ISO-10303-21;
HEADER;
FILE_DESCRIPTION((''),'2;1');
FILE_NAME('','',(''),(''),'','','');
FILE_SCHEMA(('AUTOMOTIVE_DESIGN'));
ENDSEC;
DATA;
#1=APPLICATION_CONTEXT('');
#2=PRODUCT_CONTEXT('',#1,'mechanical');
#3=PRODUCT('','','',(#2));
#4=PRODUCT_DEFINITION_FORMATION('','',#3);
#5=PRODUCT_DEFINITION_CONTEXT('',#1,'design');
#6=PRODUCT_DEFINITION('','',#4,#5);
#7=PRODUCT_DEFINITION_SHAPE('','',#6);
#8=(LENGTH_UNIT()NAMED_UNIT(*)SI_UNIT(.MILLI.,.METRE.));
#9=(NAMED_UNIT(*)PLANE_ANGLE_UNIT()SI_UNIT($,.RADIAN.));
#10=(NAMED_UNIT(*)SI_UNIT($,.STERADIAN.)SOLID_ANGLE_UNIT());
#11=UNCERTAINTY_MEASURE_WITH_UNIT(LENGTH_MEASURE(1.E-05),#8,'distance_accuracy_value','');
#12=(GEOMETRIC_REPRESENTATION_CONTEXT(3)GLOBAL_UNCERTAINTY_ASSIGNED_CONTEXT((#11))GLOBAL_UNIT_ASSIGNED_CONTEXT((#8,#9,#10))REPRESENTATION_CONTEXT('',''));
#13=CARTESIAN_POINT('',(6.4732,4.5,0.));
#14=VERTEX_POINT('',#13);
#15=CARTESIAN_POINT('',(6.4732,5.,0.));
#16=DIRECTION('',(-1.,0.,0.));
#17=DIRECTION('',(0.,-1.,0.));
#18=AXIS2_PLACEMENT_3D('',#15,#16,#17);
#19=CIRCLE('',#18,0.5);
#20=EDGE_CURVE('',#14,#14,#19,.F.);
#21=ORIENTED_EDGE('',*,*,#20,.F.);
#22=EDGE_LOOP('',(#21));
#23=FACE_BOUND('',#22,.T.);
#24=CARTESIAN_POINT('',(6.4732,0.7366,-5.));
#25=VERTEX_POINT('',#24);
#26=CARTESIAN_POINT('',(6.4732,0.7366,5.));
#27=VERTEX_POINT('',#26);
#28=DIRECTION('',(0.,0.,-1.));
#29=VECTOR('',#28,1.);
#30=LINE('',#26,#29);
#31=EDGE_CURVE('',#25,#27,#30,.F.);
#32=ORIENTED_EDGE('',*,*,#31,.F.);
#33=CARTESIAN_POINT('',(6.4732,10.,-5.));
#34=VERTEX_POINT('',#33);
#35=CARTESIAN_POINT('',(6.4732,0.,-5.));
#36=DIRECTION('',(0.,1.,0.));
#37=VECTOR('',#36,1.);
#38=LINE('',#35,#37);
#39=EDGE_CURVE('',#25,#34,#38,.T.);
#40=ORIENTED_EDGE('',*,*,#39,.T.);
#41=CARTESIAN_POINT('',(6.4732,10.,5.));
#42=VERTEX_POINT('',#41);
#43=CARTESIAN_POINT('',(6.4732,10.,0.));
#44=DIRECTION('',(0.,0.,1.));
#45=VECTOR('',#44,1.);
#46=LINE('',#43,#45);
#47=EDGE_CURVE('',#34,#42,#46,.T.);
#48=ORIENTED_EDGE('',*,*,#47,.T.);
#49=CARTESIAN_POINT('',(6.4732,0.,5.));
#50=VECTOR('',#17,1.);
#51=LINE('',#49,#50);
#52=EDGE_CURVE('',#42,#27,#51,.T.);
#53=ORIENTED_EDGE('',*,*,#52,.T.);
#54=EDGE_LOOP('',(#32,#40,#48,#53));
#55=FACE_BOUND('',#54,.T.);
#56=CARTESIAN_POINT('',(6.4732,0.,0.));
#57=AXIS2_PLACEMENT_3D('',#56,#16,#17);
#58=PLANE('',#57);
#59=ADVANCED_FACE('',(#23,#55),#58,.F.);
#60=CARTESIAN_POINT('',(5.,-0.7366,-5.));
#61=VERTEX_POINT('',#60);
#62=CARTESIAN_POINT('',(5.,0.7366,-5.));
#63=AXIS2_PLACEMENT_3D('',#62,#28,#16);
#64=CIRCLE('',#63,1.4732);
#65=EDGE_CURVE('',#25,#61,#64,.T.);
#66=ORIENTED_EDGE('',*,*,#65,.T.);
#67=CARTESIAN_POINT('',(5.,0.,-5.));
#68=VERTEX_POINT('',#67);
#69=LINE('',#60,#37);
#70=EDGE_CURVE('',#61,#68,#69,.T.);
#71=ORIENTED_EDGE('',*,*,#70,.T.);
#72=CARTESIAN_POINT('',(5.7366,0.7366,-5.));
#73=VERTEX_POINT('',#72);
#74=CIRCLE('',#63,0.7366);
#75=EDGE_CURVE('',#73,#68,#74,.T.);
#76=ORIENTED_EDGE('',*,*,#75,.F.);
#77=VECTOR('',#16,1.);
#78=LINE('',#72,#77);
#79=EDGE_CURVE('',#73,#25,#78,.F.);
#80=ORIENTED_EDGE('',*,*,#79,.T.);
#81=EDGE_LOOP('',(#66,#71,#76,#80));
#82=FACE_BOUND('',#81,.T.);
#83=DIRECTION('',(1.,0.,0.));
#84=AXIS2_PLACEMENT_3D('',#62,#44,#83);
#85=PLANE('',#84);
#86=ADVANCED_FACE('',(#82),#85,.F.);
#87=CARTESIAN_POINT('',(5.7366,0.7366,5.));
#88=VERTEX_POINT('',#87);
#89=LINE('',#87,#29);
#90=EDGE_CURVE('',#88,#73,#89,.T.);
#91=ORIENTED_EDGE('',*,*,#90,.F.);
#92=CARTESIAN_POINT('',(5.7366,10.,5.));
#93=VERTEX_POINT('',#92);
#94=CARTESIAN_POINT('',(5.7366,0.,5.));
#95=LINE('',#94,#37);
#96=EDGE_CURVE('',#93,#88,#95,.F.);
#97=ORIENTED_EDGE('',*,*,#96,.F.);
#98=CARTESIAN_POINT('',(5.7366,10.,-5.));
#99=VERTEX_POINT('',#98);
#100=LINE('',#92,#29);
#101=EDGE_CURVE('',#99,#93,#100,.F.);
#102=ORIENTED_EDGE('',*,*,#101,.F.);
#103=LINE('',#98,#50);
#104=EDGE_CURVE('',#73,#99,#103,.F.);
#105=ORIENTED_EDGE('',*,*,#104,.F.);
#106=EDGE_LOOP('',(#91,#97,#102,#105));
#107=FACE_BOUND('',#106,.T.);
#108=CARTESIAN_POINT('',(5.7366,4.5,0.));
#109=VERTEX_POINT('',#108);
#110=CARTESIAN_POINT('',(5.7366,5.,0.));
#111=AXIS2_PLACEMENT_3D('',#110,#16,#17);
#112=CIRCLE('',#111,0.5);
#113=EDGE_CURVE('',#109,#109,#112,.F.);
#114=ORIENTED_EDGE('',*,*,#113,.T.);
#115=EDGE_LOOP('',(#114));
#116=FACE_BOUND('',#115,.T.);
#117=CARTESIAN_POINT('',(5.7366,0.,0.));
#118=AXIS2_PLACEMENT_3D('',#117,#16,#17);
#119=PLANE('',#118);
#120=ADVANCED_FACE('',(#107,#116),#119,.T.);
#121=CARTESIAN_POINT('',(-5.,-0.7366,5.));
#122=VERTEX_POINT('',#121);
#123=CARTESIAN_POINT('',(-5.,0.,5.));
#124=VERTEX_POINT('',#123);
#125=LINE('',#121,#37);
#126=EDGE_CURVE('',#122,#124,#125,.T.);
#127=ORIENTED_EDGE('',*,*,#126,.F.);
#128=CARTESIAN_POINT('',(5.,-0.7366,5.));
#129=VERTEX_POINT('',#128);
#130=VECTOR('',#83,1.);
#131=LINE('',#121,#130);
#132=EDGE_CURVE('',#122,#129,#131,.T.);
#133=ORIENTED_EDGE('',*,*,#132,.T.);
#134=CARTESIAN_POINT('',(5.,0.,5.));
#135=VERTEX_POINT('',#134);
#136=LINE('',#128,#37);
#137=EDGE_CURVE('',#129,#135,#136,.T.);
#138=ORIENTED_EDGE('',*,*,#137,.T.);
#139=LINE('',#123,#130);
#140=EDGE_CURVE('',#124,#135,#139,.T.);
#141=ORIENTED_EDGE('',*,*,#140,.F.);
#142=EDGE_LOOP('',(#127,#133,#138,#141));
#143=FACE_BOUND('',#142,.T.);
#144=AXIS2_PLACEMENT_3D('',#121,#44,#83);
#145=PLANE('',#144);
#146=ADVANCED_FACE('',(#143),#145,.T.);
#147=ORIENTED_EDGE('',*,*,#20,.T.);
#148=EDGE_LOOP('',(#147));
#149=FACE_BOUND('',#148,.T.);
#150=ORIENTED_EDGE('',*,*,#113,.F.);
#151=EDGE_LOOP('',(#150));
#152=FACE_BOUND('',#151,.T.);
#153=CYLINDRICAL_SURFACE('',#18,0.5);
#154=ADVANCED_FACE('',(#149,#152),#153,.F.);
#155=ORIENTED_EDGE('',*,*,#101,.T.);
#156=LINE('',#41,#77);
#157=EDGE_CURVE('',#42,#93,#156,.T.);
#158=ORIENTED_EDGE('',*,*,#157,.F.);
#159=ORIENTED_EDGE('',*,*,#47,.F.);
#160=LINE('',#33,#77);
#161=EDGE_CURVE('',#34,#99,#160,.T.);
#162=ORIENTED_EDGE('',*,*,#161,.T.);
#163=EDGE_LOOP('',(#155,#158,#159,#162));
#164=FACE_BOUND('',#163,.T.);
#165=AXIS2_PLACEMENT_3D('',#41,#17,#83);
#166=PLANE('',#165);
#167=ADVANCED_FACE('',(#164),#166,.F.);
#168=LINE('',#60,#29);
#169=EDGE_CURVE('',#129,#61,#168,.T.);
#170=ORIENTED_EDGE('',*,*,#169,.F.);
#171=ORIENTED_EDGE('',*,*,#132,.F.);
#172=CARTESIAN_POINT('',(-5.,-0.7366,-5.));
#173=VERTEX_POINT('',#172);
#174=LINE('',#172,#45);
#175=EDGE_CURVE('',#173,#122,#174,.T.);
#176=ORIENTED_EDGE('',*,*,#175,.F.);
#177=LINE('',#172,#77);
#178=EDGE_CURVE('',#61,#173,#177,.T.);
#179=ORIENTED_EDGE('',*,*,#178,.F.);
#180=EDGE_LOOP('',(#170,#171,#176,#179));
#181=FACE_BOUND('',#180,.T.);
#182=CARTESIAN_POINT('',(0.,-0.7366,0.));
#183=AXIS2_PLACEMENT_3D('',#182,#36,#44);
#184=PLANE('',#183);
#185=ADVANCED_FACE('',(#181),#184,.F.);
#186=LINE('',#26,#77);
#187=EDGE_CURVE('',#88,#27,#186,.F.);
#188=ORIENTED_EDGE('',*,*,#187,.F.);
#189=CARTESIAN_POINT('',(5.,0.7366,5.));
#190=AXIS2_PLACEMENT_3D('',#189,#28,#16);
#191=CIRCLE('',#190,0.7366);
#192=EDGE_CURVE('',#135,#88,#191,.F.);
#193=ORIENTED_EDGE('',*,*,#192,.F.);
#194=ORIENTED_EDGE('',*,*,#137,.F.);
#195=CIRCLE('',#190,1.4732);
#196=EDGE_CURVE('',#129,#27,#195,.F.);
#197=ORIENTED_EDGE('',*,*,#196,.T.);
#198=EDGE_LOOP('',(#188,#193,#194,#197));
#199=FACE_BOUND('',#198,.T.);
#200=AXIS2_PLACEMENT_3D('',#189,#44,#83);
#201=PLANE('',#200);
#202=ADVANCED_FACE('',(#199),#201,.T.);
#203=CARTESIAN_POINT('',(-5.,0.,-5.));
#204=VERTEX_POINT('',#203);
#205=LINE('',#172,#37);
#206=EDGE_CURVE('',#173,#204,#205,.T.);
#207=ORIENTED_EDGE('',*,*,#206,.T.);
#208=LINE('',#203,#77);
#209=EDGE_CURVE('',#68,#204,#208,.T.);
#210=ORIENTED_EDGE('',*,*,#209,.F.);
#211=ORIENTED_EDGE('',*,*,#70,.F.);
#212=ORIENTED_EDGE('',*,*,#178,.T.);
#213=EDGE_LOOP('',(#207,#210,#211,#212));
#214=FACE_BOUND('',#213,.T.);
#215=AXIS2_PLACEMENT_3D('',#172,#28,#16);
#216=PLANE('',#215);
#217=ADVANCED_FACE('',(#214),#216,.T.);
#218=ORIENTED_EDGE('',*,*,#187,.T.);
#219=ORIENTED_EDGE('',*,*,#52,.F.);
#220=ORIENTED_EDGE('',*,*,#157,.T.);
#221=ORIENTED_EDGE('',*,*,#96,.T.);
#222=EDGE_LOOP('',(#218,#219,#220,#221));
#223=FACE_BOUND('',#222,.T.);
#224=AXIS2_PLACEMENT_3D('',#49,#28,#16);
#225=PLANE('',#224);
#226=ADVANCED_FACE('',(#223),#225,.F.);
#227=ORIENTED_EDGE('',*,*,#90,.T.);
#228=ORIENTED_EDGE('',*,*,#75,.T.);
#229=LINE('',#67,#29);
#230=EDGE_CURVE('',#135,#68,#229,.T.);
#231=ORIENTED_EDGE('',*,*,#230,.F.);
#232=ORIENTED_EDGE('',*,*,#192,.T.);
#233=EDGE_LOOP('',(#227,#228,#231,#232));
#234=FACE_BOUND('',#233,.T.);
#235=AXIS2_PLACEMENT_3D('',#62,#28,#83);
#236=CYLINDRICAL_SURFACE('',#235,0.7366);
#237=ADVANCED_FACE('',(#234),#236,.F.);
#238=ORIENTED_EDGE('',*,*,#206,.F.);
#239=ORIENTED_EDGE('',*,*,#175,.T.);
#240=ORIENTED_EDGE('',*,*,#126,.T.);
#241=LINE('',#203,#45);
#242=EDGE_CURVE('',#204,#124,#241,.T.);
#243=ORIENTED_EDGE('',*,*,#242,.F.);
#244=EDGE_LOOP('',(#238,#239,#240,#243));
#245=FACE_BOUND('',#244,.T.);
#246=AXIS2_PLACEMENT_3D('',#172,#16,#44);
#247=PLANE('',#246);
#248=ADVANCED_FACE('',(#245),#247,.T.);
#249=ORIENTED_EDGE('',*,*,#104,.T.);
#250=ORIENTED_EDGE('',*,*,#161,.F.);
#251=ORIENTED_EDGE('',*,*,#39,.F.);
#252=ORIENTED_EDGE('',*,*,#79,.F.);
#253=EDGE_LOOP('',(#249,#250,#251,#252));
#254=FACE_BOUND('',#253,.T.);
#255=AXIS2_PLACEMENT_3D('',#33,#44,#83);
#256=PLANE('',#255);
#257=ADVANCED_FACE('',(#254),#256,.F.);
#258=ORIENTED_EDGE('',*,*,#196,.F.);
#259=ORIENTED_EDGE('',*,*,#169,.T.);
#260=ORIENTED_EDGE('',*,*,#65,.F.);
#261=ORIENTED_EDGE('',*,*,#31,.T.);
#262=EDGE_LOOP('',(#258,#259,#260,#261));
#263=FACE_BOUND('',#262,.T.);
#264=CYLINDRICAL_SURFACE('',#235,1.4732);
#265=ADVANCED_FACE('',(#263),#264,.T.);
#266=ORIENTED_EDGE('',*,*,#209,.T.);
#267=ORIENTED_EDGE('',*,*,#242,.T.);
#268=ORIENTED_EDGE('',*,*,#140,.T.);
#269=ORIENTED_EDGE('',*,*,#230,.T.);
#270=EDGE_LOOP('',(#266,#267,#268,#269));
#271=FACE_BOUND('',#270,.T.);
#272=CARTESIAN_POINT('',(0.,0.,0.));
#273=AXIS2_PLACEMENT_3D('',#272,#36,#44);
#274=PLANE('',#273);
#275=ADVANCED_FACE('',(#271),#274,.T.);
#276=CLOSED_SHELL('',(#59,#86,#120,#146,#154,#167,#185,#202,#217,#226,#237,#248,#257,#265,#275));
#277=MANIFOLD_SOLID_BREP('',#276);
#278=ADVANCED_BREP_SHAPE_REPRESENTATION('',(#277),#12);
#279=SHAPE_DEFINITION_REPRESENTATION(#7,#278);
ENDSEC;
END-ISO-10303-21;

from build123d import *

# Parameters (mm, degrees)
SKETCH1_W               = 10
SKETCH1_H               = 10
BASE_FLANGE1_DEPTH      = 0.7366
EDGE_FLANGE1_DEPTH      = 10
EDGE_FLANGE1_START      = 0.7366
EDGE_FLANGE1_PROFILE_W  = 10
EDGE_FLANGE1_PROFILE_H  = 9.2634
EDGE_FLANGE1_PROFILE_R  = 0.5
EDGE_FLANGE1_FLAT_DEPTH = 0.7366


# Sheet-metal steps are written as plain solids
with BuildPart() as part:
    # Sketch1 → Base-Flange1 (new body)
    with BuildSketch(Plane(origin=(0, 0, 0), x_dir=(1, 0, 0), z_dir=(0, 1, 0))):
        Rectangle(SKETCH1_W, SKETCH1_H)
    extrude(amount=-BASE_FLANGE1_DEPTH)

    # Edge-Flange1 bend section (across the edge) → Edge-Flange1 (add)
    with BuildSketch(Plane(origin=(5.7366, 0, 5), x_dir=(-1, 0, 0), z_dir=(0, 0, -1))):
        with BuildLine():
            Line((-0.7366, 0.7366), (0, 0.7366))
            ThreePointArc((0, 0.7366), (0.215745145, 0.215745145), (0.7366, 0))
            Line((0.7366, 0), (0.7366, -0.7366))
            ThreePointArc((0.7366, -0.7366), (-0.30510971, -0.30510971), (-0.7366, 0.7366))
        make_face()
    extrude(amount=EDGE_FLANGE1_DEPTH)

    # Edge-Flange1 profile (on flange) → Edge-Flange1 flat (add)
    with BuildSketch(Plane(origin=(5.7366, 0, 0), x_dir=(0, 0, -1), z_dir=(1, 0, 0)).offset(EDGE_FLANGE1_START)):
        with Locations((0, 5.3683)):
            Rectangle(EDGE_FLANGE1_PROFILE_W, EDGE_FLANGE1_PROFILE_H)
        with Locations((0, 5)):
            Circle(EDGE_FLANGE1_PROFILE_R, mode=Mode.SUBTRACT)
    extrude(amount=-EDGE_FLANGE1_FLAT_DEPTH)


solid = part.part
